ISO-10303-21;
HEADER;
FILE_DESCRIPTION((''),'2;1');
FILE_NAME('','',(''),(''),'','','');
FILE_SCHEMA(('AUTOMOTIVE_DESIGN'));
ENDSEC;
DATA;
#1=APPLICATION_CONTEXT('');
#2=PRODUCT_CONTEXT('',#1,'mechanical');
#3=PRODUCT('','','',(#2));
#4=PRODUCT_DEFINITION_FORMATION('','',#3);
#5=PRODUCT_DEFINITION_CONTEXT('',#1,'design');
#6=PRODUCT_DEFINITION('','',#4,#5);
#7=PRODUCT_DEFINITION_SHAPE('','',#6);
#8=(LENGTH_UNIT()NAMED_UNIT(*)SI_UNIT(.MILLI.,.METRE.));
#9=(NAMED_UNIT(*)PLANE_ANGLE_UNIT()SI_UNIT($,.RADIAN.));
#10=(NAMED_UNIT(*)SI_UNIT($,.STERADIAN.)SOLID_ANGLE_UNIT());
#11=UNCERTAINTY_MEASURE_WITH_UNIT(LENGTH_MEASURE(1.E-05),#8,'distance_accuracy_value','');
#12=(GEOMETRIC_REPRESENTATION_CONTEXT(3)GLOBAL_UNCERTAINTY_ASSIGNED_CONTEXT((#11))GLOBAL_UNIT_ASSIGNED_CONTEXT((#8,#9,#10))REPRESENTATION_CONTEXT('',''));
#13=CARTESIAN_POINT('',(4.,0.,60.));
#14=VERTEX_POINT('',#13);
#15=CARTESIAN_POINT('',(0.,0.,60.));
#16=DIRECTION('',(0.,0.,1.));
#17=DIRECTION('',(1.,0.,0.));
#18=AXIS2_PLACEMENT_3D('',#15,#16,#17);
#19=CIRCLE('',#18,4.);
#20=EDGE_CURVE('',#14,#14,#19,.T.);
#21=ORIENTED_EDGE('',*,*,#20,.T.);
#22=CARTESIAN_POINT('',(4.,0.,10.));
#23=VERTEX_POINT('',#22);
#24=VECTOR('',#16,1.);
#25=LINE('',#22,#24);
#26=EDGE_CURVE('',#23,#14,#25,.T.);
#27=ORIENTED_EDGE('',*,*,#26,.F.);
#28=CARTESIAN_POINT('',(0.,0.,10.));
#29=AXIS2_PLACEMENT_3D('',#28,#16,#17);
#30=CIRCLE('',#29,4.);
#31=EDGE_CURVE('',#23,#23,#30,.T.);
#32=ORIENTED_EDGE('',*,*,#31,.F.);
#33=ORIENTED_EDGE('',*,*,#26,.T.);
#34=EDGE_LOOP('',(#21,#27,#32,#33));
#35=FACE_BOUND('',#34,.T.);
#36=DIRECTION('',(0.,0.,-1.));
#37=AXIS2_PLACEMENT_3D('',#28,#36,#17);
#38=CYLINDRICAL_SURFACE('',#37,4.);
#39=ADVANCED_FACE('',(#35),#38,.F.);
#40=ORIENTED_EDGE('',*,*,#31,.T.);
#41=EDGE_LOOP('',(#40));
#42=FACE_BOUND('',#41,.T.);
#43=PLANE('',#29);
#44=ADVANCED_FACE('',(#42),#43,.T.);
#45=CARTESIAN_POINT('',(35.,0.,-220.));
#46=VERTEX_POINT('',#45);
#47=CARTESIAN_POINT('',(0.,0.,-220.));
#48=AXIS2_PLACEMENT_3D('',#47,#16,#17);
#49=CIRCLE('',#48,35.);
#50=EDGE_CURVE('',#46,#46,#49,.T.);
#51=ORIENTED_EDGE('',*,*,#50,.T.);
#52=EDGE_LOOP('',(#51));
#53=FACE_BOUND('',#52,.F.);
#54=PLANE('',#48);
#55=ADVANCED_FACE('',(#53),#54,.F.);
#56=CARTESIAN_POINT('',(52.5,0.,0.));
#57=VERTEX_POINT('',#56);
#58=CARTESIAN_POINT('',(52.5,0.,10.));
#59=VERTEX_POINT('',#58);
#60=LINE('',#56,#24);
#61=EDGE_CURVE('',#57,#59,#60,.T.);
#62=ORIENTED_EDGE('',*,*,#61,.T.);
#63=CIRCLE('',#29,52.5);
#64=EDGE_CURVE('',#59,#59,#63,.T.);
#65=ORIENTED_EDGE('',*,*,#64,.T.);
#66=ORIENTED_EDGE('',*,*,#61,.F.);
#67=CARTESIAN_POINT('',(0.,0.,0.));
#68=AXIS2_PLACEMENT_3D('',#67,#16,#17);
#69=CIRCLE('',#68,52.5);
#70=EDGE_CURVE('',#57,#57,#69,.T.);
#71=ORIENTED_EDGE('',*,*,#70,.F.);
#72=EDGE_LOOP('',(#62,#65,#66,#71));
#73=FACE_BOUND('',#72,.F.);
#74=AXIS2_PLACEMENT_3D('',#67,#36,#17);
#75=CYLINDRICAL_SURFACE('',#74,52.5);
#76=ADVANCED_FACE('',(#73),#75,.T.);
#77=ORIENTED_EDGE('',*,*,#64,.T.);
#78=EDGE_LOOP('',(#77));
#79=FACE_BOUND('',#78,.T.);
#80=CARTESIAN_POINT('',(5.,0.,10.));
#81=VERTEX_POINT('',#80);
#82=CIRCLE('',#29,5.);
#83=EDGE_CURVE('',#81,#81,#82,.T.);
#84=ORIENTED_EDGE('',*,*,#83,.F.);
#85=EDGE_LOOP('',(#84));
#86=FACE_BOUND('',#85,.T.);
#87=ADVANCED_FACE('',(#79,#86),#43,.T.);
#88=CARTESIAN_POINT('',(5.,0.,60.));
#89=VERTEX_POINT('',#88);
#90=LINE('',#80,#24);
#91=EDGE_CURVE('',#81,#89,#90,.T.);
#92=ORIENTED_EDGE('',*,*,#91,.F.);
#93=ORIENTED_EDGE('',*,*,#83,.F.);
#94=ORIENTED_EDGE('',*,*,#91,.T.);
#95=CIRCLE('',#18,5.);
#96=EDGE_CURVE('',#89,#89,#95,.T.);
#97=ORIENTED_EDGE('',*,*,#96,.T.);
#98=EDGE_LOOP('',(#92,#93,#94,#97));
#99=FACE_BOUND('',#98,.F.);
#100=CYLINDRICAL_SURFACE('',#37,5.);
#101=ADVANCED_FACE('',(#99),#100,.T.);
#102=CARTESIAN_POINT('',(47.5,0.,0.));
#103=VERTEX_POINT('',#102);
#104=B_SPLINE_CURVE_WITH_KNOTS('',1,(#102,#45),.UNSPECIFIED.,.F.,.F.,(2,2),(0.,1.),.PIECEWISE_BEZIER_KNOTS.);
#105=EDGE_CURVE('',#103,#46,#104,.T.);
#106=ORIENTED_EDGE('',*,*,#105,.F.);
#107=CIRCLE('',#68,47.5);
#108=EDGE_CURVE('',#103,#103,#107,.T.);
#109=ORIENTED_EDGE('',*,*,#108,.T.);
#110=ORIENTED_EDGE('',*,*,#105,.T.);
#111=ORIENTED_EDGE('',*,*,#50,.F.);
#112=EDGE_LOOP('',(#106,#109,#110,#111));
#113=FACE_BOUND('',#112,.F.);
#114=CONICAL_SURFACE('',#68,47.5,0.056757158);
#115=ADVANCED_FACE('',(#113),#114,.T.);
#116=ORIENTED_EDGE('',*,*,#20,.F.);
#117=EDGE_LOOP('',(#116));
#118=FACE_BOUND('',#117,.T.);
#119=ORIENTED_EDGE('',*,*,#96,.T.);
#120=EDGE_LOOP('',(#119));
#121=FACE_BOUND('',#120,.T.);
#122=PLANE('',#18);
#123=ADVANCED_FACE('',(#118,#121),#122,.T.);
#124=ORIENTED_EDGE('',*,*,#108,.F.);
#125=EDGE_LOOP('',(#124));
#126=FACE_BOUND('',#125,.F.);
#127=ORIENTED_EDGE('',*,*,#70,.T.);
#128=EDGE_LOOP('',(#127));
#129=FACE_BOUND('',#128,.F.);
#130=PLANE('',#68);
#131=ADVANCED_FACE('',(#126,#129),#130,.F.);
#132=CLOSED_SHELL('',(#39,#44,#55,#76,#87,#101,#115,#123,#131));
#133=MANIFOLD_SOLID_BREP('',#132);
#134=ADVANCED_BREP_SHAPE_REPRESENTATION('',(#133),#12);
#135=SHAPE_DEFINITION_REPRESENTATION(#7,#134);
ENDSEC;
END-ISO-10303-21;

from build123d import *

# Parameters (mm, degrees)
F0_R     = 47.5
F2_R     = 35
F4_R     = 52.5
F4_R_2   = 47.5
F5_DEPTH = 10
F6_R     = 5
F6_R_2   = 4
F7_DEPTH = 50


with BuildPart() as f3:
    # F0 (on Top) → F3 section 0
    with BuildSketch(Plane.XY):
        Circle(F0_R)
    # F2 (on offset) → F3 section 1
    with BuildSketch(Plane.XY.offset(-220)):
        Circle(F2_R)
    loft()

    # F4 (on face) → F5 (join)
    with BuildSketch(Plane.XY):
        Circle(F4_R)
        Circle(F4_R_2, mode=Mode.SUBTRACT)
        Circle(F4_R_2)
    extrude(amount=F5_DEPTH)

    # F6 (on face) → F7 (join)
    with BuildSketch(Plane.XY.offset(10)):
        Circle(F6_R)
        Circle(F6_R_2, mode=Mode.SUBTRACT)
    extrude(amount=F7_DEPTH)


solid = f3.part
